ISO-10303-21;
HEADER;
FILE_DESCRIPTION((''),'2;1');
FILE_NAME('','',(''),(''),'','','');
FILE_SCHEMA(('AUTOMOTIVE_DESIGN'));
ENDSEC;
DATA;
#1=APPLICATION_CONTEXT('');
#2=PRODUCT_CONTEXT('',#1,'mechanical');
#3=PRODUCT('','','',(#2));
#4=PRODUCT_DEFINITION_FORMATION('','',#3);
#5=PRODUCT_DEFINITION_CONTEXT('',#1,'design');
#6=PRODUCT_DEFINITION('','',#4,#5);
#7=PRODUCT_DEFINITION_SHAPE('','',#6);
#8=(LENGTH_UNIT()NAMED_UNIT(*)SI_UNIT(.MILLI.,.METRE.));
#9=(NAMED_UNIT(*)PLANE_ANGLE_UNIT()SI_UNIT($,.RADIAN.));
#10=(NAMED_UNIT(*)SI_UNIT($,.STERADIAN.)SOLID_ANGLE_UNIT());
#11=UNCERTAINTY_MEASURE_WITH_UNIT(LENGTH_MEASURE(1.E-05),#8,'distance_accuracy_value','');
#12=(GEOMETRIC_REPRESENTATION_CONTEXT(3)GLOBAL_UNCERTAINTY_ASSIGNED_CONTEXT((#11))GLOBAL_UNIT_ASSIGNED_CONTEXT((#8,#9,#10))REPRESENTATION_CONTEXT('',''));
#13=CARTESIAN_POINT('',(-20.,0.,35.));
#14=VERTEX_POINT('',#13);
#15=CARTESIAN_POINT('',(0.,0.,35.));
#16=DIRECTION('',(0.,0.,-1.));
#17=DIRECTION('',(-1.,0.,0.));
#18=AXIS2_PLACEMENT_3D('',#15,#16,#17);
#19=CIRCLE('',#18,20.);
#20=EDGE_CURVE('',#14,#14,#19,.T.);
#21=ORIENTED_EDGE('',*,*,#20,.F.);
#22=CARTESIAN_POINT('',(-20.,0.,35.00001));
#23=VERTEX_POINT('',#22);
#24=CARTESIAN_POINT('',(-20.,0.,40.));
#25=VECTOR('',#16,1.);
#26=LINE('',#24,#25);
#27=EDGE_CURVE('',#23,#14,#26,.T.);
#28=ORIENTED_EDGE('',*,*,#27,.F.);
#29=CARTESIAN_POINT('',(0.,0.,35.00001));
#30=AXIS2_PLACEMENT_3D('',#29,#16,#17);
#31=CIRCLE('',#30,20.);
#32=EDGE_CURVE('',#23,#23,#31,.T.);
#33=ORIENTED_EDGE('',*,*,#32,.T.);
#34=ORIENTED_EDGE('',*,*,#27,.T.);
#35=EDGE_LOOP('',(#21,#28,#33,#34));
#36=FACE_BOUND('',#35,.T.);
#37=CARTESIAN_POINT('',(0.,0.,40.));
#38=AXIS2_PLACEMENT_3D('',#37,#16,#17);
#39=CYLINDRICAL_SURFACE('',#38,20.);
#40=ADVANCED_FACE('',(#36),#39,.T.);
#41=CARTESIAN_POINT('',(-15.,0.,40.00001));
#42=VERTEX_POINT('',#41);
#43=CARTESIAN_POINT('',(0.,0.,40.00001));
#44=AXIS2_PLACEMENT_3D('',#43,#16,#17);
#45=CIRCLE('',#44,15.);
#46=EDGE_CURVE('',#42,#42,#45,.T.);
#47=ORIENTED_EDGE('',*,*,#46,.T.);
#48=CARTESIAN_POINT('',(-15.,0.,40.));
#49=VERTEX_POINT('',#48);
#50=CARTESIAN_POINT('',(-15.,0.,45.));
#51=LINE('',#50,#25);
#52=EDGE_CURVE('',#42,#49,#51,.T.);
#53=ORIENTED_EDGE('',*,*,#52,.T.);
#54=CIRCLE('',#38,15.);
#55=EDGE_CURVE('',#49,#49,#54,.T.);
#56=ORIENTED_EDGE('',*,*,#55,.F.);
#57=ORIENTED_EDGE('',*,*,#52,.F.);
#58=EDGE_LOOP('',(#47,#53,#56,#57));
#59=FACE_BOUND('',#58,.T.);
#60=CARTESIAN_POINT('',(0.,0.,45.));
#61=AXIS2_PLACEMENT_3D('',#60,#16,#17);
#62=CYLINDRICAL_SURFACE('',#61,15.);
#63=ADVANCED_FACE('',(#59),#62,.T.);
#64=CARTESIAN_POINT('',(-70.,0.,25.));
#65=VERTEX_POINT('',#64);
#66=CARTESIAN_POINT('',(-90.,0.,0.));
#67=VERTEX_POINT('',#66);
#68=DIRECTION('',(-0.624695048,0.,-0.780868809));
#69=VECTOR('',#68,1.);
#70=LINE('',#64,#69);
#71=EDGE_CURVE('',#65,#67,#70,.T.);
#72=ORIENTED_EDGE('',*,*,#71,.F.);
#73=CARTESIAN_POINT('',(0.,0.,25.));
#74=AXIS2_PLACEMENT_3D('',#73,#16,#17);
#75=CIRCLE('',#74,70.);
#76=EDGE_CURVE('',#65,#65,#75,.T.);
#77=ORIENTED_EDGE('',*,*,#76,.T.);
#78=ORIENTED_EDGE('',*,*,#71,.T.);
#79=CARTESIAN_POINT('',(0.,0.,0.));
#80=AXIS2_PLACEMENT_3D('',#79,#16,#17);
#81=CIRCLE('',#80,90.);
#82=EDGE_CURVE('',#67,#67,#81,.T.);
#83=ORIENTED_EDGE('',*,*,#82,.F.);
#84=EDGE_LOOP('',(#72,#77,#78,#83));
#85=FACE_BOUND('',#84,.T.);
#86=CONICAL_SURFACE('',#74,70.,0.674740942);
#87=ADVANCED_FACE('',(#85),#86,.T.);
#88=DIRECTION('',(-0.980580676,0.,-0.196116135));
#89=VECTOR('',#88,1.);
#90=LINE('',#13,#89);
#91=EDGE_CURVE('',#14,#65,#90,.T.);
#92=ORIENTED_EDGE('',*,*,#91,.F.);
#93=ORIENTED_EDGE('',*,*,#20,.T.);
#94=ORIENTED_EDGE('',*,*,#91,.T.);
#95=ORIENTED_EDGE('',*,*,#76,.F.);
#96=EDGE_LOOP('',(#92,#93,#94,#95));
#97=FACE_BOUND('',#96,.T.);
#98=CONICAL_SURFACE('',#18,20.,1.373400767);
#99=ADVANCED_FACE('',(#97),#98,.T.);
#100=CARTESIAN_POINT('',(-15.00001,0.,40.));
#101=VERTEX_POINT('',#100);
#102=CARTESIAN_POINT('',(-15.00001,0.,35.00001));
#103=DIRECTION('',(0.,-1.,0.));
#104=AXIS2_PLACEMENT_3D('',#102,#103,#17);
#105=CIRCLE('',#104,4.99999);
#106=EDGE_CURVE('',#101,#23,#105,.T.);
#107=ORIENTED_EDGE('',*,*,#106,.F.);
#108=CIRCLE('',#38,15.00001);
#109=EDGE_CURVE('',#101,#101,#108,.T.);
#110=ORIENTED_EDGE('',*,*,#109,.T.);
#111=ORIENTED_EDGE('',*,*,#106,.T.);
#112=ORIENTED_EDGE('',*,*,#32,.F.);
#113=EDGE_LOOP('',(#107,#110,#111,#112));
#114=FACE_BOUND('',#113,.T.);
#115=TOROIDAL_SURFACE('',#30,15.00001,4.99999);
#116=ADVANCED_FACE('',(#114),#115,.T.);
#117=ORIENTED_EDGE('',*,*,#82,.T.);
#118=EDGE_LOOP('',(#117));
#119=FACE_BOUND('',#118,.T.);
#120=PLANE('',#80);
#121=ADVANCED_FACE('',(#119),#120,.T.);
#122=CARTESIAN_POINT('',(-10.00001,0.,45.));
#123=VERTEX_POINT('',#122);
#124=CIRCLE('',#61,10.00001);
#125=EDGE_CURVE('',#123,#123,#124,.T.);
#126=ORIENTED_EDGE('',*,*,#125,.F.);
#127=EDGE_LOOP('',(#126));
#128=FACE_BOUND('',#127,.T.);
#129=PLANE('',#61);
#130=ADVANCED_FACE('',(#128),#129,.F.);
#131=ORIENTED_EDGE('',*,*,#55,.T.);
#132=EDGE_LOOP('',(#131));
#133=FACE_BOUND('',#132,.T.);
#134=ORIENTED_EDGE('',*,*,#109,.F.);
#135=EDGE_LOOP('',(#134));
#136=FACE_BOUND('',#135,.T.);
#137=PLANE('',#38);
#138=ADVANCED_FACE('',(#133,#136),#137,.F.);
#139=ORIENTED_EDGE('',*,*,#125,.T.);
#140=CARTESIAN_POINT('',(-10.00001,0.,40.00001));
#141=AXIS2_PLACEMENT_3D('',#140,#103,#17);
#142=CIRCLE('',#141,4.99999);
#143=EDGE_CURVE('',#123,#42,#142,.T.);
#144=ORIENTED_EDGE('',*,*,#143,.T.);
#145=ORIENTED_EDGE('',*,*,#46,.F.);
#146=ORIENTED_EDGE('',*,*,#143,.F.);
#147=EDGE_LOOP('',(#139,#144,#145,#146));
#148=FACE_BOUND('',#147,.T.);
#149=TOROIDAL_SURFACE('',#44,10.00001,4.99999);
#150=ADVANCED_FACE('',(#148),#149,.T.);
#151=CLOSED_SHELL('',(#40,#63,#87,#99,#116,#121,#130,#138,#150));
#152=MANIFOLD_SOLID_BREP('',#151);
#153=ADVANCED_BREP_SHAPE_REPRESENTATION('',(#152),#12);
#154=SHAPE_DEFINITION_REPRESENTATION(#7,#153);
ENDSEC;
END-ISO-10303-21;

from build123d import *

# Parameters (mm, degrees)
F2_R = 4.99999


# Not quite as in the source:
# - a fillet or chamfer is up to 0.001 mm smaller than in the source, because OpenCascade refuses the exact size


with BuildPart() as f1:
    # F0 (on Front) → F1 (revolve)
    with BuildSketch(Plane.XZ):
        Polygon((-70, 25), (-90, 0), (0, 0), (0, 45), (-15, 45), (-15, 40), (-20, 40), (-20, 35), align=None)
    revolve(axis=Axis((0, 0, 22.5), (0, 0, -1)))

    # F2 (radius 5 in the source; OpenCascade refuses exactly that, so slightly less here)
    f2_edges = [f1.edges().sort_by_distance(p)[0] for p in [
        (20, 0, 40),
        (15, 0, 45),
    ]]
    fillet(f2_edges, radius=F2_R)


solid = f1.part
